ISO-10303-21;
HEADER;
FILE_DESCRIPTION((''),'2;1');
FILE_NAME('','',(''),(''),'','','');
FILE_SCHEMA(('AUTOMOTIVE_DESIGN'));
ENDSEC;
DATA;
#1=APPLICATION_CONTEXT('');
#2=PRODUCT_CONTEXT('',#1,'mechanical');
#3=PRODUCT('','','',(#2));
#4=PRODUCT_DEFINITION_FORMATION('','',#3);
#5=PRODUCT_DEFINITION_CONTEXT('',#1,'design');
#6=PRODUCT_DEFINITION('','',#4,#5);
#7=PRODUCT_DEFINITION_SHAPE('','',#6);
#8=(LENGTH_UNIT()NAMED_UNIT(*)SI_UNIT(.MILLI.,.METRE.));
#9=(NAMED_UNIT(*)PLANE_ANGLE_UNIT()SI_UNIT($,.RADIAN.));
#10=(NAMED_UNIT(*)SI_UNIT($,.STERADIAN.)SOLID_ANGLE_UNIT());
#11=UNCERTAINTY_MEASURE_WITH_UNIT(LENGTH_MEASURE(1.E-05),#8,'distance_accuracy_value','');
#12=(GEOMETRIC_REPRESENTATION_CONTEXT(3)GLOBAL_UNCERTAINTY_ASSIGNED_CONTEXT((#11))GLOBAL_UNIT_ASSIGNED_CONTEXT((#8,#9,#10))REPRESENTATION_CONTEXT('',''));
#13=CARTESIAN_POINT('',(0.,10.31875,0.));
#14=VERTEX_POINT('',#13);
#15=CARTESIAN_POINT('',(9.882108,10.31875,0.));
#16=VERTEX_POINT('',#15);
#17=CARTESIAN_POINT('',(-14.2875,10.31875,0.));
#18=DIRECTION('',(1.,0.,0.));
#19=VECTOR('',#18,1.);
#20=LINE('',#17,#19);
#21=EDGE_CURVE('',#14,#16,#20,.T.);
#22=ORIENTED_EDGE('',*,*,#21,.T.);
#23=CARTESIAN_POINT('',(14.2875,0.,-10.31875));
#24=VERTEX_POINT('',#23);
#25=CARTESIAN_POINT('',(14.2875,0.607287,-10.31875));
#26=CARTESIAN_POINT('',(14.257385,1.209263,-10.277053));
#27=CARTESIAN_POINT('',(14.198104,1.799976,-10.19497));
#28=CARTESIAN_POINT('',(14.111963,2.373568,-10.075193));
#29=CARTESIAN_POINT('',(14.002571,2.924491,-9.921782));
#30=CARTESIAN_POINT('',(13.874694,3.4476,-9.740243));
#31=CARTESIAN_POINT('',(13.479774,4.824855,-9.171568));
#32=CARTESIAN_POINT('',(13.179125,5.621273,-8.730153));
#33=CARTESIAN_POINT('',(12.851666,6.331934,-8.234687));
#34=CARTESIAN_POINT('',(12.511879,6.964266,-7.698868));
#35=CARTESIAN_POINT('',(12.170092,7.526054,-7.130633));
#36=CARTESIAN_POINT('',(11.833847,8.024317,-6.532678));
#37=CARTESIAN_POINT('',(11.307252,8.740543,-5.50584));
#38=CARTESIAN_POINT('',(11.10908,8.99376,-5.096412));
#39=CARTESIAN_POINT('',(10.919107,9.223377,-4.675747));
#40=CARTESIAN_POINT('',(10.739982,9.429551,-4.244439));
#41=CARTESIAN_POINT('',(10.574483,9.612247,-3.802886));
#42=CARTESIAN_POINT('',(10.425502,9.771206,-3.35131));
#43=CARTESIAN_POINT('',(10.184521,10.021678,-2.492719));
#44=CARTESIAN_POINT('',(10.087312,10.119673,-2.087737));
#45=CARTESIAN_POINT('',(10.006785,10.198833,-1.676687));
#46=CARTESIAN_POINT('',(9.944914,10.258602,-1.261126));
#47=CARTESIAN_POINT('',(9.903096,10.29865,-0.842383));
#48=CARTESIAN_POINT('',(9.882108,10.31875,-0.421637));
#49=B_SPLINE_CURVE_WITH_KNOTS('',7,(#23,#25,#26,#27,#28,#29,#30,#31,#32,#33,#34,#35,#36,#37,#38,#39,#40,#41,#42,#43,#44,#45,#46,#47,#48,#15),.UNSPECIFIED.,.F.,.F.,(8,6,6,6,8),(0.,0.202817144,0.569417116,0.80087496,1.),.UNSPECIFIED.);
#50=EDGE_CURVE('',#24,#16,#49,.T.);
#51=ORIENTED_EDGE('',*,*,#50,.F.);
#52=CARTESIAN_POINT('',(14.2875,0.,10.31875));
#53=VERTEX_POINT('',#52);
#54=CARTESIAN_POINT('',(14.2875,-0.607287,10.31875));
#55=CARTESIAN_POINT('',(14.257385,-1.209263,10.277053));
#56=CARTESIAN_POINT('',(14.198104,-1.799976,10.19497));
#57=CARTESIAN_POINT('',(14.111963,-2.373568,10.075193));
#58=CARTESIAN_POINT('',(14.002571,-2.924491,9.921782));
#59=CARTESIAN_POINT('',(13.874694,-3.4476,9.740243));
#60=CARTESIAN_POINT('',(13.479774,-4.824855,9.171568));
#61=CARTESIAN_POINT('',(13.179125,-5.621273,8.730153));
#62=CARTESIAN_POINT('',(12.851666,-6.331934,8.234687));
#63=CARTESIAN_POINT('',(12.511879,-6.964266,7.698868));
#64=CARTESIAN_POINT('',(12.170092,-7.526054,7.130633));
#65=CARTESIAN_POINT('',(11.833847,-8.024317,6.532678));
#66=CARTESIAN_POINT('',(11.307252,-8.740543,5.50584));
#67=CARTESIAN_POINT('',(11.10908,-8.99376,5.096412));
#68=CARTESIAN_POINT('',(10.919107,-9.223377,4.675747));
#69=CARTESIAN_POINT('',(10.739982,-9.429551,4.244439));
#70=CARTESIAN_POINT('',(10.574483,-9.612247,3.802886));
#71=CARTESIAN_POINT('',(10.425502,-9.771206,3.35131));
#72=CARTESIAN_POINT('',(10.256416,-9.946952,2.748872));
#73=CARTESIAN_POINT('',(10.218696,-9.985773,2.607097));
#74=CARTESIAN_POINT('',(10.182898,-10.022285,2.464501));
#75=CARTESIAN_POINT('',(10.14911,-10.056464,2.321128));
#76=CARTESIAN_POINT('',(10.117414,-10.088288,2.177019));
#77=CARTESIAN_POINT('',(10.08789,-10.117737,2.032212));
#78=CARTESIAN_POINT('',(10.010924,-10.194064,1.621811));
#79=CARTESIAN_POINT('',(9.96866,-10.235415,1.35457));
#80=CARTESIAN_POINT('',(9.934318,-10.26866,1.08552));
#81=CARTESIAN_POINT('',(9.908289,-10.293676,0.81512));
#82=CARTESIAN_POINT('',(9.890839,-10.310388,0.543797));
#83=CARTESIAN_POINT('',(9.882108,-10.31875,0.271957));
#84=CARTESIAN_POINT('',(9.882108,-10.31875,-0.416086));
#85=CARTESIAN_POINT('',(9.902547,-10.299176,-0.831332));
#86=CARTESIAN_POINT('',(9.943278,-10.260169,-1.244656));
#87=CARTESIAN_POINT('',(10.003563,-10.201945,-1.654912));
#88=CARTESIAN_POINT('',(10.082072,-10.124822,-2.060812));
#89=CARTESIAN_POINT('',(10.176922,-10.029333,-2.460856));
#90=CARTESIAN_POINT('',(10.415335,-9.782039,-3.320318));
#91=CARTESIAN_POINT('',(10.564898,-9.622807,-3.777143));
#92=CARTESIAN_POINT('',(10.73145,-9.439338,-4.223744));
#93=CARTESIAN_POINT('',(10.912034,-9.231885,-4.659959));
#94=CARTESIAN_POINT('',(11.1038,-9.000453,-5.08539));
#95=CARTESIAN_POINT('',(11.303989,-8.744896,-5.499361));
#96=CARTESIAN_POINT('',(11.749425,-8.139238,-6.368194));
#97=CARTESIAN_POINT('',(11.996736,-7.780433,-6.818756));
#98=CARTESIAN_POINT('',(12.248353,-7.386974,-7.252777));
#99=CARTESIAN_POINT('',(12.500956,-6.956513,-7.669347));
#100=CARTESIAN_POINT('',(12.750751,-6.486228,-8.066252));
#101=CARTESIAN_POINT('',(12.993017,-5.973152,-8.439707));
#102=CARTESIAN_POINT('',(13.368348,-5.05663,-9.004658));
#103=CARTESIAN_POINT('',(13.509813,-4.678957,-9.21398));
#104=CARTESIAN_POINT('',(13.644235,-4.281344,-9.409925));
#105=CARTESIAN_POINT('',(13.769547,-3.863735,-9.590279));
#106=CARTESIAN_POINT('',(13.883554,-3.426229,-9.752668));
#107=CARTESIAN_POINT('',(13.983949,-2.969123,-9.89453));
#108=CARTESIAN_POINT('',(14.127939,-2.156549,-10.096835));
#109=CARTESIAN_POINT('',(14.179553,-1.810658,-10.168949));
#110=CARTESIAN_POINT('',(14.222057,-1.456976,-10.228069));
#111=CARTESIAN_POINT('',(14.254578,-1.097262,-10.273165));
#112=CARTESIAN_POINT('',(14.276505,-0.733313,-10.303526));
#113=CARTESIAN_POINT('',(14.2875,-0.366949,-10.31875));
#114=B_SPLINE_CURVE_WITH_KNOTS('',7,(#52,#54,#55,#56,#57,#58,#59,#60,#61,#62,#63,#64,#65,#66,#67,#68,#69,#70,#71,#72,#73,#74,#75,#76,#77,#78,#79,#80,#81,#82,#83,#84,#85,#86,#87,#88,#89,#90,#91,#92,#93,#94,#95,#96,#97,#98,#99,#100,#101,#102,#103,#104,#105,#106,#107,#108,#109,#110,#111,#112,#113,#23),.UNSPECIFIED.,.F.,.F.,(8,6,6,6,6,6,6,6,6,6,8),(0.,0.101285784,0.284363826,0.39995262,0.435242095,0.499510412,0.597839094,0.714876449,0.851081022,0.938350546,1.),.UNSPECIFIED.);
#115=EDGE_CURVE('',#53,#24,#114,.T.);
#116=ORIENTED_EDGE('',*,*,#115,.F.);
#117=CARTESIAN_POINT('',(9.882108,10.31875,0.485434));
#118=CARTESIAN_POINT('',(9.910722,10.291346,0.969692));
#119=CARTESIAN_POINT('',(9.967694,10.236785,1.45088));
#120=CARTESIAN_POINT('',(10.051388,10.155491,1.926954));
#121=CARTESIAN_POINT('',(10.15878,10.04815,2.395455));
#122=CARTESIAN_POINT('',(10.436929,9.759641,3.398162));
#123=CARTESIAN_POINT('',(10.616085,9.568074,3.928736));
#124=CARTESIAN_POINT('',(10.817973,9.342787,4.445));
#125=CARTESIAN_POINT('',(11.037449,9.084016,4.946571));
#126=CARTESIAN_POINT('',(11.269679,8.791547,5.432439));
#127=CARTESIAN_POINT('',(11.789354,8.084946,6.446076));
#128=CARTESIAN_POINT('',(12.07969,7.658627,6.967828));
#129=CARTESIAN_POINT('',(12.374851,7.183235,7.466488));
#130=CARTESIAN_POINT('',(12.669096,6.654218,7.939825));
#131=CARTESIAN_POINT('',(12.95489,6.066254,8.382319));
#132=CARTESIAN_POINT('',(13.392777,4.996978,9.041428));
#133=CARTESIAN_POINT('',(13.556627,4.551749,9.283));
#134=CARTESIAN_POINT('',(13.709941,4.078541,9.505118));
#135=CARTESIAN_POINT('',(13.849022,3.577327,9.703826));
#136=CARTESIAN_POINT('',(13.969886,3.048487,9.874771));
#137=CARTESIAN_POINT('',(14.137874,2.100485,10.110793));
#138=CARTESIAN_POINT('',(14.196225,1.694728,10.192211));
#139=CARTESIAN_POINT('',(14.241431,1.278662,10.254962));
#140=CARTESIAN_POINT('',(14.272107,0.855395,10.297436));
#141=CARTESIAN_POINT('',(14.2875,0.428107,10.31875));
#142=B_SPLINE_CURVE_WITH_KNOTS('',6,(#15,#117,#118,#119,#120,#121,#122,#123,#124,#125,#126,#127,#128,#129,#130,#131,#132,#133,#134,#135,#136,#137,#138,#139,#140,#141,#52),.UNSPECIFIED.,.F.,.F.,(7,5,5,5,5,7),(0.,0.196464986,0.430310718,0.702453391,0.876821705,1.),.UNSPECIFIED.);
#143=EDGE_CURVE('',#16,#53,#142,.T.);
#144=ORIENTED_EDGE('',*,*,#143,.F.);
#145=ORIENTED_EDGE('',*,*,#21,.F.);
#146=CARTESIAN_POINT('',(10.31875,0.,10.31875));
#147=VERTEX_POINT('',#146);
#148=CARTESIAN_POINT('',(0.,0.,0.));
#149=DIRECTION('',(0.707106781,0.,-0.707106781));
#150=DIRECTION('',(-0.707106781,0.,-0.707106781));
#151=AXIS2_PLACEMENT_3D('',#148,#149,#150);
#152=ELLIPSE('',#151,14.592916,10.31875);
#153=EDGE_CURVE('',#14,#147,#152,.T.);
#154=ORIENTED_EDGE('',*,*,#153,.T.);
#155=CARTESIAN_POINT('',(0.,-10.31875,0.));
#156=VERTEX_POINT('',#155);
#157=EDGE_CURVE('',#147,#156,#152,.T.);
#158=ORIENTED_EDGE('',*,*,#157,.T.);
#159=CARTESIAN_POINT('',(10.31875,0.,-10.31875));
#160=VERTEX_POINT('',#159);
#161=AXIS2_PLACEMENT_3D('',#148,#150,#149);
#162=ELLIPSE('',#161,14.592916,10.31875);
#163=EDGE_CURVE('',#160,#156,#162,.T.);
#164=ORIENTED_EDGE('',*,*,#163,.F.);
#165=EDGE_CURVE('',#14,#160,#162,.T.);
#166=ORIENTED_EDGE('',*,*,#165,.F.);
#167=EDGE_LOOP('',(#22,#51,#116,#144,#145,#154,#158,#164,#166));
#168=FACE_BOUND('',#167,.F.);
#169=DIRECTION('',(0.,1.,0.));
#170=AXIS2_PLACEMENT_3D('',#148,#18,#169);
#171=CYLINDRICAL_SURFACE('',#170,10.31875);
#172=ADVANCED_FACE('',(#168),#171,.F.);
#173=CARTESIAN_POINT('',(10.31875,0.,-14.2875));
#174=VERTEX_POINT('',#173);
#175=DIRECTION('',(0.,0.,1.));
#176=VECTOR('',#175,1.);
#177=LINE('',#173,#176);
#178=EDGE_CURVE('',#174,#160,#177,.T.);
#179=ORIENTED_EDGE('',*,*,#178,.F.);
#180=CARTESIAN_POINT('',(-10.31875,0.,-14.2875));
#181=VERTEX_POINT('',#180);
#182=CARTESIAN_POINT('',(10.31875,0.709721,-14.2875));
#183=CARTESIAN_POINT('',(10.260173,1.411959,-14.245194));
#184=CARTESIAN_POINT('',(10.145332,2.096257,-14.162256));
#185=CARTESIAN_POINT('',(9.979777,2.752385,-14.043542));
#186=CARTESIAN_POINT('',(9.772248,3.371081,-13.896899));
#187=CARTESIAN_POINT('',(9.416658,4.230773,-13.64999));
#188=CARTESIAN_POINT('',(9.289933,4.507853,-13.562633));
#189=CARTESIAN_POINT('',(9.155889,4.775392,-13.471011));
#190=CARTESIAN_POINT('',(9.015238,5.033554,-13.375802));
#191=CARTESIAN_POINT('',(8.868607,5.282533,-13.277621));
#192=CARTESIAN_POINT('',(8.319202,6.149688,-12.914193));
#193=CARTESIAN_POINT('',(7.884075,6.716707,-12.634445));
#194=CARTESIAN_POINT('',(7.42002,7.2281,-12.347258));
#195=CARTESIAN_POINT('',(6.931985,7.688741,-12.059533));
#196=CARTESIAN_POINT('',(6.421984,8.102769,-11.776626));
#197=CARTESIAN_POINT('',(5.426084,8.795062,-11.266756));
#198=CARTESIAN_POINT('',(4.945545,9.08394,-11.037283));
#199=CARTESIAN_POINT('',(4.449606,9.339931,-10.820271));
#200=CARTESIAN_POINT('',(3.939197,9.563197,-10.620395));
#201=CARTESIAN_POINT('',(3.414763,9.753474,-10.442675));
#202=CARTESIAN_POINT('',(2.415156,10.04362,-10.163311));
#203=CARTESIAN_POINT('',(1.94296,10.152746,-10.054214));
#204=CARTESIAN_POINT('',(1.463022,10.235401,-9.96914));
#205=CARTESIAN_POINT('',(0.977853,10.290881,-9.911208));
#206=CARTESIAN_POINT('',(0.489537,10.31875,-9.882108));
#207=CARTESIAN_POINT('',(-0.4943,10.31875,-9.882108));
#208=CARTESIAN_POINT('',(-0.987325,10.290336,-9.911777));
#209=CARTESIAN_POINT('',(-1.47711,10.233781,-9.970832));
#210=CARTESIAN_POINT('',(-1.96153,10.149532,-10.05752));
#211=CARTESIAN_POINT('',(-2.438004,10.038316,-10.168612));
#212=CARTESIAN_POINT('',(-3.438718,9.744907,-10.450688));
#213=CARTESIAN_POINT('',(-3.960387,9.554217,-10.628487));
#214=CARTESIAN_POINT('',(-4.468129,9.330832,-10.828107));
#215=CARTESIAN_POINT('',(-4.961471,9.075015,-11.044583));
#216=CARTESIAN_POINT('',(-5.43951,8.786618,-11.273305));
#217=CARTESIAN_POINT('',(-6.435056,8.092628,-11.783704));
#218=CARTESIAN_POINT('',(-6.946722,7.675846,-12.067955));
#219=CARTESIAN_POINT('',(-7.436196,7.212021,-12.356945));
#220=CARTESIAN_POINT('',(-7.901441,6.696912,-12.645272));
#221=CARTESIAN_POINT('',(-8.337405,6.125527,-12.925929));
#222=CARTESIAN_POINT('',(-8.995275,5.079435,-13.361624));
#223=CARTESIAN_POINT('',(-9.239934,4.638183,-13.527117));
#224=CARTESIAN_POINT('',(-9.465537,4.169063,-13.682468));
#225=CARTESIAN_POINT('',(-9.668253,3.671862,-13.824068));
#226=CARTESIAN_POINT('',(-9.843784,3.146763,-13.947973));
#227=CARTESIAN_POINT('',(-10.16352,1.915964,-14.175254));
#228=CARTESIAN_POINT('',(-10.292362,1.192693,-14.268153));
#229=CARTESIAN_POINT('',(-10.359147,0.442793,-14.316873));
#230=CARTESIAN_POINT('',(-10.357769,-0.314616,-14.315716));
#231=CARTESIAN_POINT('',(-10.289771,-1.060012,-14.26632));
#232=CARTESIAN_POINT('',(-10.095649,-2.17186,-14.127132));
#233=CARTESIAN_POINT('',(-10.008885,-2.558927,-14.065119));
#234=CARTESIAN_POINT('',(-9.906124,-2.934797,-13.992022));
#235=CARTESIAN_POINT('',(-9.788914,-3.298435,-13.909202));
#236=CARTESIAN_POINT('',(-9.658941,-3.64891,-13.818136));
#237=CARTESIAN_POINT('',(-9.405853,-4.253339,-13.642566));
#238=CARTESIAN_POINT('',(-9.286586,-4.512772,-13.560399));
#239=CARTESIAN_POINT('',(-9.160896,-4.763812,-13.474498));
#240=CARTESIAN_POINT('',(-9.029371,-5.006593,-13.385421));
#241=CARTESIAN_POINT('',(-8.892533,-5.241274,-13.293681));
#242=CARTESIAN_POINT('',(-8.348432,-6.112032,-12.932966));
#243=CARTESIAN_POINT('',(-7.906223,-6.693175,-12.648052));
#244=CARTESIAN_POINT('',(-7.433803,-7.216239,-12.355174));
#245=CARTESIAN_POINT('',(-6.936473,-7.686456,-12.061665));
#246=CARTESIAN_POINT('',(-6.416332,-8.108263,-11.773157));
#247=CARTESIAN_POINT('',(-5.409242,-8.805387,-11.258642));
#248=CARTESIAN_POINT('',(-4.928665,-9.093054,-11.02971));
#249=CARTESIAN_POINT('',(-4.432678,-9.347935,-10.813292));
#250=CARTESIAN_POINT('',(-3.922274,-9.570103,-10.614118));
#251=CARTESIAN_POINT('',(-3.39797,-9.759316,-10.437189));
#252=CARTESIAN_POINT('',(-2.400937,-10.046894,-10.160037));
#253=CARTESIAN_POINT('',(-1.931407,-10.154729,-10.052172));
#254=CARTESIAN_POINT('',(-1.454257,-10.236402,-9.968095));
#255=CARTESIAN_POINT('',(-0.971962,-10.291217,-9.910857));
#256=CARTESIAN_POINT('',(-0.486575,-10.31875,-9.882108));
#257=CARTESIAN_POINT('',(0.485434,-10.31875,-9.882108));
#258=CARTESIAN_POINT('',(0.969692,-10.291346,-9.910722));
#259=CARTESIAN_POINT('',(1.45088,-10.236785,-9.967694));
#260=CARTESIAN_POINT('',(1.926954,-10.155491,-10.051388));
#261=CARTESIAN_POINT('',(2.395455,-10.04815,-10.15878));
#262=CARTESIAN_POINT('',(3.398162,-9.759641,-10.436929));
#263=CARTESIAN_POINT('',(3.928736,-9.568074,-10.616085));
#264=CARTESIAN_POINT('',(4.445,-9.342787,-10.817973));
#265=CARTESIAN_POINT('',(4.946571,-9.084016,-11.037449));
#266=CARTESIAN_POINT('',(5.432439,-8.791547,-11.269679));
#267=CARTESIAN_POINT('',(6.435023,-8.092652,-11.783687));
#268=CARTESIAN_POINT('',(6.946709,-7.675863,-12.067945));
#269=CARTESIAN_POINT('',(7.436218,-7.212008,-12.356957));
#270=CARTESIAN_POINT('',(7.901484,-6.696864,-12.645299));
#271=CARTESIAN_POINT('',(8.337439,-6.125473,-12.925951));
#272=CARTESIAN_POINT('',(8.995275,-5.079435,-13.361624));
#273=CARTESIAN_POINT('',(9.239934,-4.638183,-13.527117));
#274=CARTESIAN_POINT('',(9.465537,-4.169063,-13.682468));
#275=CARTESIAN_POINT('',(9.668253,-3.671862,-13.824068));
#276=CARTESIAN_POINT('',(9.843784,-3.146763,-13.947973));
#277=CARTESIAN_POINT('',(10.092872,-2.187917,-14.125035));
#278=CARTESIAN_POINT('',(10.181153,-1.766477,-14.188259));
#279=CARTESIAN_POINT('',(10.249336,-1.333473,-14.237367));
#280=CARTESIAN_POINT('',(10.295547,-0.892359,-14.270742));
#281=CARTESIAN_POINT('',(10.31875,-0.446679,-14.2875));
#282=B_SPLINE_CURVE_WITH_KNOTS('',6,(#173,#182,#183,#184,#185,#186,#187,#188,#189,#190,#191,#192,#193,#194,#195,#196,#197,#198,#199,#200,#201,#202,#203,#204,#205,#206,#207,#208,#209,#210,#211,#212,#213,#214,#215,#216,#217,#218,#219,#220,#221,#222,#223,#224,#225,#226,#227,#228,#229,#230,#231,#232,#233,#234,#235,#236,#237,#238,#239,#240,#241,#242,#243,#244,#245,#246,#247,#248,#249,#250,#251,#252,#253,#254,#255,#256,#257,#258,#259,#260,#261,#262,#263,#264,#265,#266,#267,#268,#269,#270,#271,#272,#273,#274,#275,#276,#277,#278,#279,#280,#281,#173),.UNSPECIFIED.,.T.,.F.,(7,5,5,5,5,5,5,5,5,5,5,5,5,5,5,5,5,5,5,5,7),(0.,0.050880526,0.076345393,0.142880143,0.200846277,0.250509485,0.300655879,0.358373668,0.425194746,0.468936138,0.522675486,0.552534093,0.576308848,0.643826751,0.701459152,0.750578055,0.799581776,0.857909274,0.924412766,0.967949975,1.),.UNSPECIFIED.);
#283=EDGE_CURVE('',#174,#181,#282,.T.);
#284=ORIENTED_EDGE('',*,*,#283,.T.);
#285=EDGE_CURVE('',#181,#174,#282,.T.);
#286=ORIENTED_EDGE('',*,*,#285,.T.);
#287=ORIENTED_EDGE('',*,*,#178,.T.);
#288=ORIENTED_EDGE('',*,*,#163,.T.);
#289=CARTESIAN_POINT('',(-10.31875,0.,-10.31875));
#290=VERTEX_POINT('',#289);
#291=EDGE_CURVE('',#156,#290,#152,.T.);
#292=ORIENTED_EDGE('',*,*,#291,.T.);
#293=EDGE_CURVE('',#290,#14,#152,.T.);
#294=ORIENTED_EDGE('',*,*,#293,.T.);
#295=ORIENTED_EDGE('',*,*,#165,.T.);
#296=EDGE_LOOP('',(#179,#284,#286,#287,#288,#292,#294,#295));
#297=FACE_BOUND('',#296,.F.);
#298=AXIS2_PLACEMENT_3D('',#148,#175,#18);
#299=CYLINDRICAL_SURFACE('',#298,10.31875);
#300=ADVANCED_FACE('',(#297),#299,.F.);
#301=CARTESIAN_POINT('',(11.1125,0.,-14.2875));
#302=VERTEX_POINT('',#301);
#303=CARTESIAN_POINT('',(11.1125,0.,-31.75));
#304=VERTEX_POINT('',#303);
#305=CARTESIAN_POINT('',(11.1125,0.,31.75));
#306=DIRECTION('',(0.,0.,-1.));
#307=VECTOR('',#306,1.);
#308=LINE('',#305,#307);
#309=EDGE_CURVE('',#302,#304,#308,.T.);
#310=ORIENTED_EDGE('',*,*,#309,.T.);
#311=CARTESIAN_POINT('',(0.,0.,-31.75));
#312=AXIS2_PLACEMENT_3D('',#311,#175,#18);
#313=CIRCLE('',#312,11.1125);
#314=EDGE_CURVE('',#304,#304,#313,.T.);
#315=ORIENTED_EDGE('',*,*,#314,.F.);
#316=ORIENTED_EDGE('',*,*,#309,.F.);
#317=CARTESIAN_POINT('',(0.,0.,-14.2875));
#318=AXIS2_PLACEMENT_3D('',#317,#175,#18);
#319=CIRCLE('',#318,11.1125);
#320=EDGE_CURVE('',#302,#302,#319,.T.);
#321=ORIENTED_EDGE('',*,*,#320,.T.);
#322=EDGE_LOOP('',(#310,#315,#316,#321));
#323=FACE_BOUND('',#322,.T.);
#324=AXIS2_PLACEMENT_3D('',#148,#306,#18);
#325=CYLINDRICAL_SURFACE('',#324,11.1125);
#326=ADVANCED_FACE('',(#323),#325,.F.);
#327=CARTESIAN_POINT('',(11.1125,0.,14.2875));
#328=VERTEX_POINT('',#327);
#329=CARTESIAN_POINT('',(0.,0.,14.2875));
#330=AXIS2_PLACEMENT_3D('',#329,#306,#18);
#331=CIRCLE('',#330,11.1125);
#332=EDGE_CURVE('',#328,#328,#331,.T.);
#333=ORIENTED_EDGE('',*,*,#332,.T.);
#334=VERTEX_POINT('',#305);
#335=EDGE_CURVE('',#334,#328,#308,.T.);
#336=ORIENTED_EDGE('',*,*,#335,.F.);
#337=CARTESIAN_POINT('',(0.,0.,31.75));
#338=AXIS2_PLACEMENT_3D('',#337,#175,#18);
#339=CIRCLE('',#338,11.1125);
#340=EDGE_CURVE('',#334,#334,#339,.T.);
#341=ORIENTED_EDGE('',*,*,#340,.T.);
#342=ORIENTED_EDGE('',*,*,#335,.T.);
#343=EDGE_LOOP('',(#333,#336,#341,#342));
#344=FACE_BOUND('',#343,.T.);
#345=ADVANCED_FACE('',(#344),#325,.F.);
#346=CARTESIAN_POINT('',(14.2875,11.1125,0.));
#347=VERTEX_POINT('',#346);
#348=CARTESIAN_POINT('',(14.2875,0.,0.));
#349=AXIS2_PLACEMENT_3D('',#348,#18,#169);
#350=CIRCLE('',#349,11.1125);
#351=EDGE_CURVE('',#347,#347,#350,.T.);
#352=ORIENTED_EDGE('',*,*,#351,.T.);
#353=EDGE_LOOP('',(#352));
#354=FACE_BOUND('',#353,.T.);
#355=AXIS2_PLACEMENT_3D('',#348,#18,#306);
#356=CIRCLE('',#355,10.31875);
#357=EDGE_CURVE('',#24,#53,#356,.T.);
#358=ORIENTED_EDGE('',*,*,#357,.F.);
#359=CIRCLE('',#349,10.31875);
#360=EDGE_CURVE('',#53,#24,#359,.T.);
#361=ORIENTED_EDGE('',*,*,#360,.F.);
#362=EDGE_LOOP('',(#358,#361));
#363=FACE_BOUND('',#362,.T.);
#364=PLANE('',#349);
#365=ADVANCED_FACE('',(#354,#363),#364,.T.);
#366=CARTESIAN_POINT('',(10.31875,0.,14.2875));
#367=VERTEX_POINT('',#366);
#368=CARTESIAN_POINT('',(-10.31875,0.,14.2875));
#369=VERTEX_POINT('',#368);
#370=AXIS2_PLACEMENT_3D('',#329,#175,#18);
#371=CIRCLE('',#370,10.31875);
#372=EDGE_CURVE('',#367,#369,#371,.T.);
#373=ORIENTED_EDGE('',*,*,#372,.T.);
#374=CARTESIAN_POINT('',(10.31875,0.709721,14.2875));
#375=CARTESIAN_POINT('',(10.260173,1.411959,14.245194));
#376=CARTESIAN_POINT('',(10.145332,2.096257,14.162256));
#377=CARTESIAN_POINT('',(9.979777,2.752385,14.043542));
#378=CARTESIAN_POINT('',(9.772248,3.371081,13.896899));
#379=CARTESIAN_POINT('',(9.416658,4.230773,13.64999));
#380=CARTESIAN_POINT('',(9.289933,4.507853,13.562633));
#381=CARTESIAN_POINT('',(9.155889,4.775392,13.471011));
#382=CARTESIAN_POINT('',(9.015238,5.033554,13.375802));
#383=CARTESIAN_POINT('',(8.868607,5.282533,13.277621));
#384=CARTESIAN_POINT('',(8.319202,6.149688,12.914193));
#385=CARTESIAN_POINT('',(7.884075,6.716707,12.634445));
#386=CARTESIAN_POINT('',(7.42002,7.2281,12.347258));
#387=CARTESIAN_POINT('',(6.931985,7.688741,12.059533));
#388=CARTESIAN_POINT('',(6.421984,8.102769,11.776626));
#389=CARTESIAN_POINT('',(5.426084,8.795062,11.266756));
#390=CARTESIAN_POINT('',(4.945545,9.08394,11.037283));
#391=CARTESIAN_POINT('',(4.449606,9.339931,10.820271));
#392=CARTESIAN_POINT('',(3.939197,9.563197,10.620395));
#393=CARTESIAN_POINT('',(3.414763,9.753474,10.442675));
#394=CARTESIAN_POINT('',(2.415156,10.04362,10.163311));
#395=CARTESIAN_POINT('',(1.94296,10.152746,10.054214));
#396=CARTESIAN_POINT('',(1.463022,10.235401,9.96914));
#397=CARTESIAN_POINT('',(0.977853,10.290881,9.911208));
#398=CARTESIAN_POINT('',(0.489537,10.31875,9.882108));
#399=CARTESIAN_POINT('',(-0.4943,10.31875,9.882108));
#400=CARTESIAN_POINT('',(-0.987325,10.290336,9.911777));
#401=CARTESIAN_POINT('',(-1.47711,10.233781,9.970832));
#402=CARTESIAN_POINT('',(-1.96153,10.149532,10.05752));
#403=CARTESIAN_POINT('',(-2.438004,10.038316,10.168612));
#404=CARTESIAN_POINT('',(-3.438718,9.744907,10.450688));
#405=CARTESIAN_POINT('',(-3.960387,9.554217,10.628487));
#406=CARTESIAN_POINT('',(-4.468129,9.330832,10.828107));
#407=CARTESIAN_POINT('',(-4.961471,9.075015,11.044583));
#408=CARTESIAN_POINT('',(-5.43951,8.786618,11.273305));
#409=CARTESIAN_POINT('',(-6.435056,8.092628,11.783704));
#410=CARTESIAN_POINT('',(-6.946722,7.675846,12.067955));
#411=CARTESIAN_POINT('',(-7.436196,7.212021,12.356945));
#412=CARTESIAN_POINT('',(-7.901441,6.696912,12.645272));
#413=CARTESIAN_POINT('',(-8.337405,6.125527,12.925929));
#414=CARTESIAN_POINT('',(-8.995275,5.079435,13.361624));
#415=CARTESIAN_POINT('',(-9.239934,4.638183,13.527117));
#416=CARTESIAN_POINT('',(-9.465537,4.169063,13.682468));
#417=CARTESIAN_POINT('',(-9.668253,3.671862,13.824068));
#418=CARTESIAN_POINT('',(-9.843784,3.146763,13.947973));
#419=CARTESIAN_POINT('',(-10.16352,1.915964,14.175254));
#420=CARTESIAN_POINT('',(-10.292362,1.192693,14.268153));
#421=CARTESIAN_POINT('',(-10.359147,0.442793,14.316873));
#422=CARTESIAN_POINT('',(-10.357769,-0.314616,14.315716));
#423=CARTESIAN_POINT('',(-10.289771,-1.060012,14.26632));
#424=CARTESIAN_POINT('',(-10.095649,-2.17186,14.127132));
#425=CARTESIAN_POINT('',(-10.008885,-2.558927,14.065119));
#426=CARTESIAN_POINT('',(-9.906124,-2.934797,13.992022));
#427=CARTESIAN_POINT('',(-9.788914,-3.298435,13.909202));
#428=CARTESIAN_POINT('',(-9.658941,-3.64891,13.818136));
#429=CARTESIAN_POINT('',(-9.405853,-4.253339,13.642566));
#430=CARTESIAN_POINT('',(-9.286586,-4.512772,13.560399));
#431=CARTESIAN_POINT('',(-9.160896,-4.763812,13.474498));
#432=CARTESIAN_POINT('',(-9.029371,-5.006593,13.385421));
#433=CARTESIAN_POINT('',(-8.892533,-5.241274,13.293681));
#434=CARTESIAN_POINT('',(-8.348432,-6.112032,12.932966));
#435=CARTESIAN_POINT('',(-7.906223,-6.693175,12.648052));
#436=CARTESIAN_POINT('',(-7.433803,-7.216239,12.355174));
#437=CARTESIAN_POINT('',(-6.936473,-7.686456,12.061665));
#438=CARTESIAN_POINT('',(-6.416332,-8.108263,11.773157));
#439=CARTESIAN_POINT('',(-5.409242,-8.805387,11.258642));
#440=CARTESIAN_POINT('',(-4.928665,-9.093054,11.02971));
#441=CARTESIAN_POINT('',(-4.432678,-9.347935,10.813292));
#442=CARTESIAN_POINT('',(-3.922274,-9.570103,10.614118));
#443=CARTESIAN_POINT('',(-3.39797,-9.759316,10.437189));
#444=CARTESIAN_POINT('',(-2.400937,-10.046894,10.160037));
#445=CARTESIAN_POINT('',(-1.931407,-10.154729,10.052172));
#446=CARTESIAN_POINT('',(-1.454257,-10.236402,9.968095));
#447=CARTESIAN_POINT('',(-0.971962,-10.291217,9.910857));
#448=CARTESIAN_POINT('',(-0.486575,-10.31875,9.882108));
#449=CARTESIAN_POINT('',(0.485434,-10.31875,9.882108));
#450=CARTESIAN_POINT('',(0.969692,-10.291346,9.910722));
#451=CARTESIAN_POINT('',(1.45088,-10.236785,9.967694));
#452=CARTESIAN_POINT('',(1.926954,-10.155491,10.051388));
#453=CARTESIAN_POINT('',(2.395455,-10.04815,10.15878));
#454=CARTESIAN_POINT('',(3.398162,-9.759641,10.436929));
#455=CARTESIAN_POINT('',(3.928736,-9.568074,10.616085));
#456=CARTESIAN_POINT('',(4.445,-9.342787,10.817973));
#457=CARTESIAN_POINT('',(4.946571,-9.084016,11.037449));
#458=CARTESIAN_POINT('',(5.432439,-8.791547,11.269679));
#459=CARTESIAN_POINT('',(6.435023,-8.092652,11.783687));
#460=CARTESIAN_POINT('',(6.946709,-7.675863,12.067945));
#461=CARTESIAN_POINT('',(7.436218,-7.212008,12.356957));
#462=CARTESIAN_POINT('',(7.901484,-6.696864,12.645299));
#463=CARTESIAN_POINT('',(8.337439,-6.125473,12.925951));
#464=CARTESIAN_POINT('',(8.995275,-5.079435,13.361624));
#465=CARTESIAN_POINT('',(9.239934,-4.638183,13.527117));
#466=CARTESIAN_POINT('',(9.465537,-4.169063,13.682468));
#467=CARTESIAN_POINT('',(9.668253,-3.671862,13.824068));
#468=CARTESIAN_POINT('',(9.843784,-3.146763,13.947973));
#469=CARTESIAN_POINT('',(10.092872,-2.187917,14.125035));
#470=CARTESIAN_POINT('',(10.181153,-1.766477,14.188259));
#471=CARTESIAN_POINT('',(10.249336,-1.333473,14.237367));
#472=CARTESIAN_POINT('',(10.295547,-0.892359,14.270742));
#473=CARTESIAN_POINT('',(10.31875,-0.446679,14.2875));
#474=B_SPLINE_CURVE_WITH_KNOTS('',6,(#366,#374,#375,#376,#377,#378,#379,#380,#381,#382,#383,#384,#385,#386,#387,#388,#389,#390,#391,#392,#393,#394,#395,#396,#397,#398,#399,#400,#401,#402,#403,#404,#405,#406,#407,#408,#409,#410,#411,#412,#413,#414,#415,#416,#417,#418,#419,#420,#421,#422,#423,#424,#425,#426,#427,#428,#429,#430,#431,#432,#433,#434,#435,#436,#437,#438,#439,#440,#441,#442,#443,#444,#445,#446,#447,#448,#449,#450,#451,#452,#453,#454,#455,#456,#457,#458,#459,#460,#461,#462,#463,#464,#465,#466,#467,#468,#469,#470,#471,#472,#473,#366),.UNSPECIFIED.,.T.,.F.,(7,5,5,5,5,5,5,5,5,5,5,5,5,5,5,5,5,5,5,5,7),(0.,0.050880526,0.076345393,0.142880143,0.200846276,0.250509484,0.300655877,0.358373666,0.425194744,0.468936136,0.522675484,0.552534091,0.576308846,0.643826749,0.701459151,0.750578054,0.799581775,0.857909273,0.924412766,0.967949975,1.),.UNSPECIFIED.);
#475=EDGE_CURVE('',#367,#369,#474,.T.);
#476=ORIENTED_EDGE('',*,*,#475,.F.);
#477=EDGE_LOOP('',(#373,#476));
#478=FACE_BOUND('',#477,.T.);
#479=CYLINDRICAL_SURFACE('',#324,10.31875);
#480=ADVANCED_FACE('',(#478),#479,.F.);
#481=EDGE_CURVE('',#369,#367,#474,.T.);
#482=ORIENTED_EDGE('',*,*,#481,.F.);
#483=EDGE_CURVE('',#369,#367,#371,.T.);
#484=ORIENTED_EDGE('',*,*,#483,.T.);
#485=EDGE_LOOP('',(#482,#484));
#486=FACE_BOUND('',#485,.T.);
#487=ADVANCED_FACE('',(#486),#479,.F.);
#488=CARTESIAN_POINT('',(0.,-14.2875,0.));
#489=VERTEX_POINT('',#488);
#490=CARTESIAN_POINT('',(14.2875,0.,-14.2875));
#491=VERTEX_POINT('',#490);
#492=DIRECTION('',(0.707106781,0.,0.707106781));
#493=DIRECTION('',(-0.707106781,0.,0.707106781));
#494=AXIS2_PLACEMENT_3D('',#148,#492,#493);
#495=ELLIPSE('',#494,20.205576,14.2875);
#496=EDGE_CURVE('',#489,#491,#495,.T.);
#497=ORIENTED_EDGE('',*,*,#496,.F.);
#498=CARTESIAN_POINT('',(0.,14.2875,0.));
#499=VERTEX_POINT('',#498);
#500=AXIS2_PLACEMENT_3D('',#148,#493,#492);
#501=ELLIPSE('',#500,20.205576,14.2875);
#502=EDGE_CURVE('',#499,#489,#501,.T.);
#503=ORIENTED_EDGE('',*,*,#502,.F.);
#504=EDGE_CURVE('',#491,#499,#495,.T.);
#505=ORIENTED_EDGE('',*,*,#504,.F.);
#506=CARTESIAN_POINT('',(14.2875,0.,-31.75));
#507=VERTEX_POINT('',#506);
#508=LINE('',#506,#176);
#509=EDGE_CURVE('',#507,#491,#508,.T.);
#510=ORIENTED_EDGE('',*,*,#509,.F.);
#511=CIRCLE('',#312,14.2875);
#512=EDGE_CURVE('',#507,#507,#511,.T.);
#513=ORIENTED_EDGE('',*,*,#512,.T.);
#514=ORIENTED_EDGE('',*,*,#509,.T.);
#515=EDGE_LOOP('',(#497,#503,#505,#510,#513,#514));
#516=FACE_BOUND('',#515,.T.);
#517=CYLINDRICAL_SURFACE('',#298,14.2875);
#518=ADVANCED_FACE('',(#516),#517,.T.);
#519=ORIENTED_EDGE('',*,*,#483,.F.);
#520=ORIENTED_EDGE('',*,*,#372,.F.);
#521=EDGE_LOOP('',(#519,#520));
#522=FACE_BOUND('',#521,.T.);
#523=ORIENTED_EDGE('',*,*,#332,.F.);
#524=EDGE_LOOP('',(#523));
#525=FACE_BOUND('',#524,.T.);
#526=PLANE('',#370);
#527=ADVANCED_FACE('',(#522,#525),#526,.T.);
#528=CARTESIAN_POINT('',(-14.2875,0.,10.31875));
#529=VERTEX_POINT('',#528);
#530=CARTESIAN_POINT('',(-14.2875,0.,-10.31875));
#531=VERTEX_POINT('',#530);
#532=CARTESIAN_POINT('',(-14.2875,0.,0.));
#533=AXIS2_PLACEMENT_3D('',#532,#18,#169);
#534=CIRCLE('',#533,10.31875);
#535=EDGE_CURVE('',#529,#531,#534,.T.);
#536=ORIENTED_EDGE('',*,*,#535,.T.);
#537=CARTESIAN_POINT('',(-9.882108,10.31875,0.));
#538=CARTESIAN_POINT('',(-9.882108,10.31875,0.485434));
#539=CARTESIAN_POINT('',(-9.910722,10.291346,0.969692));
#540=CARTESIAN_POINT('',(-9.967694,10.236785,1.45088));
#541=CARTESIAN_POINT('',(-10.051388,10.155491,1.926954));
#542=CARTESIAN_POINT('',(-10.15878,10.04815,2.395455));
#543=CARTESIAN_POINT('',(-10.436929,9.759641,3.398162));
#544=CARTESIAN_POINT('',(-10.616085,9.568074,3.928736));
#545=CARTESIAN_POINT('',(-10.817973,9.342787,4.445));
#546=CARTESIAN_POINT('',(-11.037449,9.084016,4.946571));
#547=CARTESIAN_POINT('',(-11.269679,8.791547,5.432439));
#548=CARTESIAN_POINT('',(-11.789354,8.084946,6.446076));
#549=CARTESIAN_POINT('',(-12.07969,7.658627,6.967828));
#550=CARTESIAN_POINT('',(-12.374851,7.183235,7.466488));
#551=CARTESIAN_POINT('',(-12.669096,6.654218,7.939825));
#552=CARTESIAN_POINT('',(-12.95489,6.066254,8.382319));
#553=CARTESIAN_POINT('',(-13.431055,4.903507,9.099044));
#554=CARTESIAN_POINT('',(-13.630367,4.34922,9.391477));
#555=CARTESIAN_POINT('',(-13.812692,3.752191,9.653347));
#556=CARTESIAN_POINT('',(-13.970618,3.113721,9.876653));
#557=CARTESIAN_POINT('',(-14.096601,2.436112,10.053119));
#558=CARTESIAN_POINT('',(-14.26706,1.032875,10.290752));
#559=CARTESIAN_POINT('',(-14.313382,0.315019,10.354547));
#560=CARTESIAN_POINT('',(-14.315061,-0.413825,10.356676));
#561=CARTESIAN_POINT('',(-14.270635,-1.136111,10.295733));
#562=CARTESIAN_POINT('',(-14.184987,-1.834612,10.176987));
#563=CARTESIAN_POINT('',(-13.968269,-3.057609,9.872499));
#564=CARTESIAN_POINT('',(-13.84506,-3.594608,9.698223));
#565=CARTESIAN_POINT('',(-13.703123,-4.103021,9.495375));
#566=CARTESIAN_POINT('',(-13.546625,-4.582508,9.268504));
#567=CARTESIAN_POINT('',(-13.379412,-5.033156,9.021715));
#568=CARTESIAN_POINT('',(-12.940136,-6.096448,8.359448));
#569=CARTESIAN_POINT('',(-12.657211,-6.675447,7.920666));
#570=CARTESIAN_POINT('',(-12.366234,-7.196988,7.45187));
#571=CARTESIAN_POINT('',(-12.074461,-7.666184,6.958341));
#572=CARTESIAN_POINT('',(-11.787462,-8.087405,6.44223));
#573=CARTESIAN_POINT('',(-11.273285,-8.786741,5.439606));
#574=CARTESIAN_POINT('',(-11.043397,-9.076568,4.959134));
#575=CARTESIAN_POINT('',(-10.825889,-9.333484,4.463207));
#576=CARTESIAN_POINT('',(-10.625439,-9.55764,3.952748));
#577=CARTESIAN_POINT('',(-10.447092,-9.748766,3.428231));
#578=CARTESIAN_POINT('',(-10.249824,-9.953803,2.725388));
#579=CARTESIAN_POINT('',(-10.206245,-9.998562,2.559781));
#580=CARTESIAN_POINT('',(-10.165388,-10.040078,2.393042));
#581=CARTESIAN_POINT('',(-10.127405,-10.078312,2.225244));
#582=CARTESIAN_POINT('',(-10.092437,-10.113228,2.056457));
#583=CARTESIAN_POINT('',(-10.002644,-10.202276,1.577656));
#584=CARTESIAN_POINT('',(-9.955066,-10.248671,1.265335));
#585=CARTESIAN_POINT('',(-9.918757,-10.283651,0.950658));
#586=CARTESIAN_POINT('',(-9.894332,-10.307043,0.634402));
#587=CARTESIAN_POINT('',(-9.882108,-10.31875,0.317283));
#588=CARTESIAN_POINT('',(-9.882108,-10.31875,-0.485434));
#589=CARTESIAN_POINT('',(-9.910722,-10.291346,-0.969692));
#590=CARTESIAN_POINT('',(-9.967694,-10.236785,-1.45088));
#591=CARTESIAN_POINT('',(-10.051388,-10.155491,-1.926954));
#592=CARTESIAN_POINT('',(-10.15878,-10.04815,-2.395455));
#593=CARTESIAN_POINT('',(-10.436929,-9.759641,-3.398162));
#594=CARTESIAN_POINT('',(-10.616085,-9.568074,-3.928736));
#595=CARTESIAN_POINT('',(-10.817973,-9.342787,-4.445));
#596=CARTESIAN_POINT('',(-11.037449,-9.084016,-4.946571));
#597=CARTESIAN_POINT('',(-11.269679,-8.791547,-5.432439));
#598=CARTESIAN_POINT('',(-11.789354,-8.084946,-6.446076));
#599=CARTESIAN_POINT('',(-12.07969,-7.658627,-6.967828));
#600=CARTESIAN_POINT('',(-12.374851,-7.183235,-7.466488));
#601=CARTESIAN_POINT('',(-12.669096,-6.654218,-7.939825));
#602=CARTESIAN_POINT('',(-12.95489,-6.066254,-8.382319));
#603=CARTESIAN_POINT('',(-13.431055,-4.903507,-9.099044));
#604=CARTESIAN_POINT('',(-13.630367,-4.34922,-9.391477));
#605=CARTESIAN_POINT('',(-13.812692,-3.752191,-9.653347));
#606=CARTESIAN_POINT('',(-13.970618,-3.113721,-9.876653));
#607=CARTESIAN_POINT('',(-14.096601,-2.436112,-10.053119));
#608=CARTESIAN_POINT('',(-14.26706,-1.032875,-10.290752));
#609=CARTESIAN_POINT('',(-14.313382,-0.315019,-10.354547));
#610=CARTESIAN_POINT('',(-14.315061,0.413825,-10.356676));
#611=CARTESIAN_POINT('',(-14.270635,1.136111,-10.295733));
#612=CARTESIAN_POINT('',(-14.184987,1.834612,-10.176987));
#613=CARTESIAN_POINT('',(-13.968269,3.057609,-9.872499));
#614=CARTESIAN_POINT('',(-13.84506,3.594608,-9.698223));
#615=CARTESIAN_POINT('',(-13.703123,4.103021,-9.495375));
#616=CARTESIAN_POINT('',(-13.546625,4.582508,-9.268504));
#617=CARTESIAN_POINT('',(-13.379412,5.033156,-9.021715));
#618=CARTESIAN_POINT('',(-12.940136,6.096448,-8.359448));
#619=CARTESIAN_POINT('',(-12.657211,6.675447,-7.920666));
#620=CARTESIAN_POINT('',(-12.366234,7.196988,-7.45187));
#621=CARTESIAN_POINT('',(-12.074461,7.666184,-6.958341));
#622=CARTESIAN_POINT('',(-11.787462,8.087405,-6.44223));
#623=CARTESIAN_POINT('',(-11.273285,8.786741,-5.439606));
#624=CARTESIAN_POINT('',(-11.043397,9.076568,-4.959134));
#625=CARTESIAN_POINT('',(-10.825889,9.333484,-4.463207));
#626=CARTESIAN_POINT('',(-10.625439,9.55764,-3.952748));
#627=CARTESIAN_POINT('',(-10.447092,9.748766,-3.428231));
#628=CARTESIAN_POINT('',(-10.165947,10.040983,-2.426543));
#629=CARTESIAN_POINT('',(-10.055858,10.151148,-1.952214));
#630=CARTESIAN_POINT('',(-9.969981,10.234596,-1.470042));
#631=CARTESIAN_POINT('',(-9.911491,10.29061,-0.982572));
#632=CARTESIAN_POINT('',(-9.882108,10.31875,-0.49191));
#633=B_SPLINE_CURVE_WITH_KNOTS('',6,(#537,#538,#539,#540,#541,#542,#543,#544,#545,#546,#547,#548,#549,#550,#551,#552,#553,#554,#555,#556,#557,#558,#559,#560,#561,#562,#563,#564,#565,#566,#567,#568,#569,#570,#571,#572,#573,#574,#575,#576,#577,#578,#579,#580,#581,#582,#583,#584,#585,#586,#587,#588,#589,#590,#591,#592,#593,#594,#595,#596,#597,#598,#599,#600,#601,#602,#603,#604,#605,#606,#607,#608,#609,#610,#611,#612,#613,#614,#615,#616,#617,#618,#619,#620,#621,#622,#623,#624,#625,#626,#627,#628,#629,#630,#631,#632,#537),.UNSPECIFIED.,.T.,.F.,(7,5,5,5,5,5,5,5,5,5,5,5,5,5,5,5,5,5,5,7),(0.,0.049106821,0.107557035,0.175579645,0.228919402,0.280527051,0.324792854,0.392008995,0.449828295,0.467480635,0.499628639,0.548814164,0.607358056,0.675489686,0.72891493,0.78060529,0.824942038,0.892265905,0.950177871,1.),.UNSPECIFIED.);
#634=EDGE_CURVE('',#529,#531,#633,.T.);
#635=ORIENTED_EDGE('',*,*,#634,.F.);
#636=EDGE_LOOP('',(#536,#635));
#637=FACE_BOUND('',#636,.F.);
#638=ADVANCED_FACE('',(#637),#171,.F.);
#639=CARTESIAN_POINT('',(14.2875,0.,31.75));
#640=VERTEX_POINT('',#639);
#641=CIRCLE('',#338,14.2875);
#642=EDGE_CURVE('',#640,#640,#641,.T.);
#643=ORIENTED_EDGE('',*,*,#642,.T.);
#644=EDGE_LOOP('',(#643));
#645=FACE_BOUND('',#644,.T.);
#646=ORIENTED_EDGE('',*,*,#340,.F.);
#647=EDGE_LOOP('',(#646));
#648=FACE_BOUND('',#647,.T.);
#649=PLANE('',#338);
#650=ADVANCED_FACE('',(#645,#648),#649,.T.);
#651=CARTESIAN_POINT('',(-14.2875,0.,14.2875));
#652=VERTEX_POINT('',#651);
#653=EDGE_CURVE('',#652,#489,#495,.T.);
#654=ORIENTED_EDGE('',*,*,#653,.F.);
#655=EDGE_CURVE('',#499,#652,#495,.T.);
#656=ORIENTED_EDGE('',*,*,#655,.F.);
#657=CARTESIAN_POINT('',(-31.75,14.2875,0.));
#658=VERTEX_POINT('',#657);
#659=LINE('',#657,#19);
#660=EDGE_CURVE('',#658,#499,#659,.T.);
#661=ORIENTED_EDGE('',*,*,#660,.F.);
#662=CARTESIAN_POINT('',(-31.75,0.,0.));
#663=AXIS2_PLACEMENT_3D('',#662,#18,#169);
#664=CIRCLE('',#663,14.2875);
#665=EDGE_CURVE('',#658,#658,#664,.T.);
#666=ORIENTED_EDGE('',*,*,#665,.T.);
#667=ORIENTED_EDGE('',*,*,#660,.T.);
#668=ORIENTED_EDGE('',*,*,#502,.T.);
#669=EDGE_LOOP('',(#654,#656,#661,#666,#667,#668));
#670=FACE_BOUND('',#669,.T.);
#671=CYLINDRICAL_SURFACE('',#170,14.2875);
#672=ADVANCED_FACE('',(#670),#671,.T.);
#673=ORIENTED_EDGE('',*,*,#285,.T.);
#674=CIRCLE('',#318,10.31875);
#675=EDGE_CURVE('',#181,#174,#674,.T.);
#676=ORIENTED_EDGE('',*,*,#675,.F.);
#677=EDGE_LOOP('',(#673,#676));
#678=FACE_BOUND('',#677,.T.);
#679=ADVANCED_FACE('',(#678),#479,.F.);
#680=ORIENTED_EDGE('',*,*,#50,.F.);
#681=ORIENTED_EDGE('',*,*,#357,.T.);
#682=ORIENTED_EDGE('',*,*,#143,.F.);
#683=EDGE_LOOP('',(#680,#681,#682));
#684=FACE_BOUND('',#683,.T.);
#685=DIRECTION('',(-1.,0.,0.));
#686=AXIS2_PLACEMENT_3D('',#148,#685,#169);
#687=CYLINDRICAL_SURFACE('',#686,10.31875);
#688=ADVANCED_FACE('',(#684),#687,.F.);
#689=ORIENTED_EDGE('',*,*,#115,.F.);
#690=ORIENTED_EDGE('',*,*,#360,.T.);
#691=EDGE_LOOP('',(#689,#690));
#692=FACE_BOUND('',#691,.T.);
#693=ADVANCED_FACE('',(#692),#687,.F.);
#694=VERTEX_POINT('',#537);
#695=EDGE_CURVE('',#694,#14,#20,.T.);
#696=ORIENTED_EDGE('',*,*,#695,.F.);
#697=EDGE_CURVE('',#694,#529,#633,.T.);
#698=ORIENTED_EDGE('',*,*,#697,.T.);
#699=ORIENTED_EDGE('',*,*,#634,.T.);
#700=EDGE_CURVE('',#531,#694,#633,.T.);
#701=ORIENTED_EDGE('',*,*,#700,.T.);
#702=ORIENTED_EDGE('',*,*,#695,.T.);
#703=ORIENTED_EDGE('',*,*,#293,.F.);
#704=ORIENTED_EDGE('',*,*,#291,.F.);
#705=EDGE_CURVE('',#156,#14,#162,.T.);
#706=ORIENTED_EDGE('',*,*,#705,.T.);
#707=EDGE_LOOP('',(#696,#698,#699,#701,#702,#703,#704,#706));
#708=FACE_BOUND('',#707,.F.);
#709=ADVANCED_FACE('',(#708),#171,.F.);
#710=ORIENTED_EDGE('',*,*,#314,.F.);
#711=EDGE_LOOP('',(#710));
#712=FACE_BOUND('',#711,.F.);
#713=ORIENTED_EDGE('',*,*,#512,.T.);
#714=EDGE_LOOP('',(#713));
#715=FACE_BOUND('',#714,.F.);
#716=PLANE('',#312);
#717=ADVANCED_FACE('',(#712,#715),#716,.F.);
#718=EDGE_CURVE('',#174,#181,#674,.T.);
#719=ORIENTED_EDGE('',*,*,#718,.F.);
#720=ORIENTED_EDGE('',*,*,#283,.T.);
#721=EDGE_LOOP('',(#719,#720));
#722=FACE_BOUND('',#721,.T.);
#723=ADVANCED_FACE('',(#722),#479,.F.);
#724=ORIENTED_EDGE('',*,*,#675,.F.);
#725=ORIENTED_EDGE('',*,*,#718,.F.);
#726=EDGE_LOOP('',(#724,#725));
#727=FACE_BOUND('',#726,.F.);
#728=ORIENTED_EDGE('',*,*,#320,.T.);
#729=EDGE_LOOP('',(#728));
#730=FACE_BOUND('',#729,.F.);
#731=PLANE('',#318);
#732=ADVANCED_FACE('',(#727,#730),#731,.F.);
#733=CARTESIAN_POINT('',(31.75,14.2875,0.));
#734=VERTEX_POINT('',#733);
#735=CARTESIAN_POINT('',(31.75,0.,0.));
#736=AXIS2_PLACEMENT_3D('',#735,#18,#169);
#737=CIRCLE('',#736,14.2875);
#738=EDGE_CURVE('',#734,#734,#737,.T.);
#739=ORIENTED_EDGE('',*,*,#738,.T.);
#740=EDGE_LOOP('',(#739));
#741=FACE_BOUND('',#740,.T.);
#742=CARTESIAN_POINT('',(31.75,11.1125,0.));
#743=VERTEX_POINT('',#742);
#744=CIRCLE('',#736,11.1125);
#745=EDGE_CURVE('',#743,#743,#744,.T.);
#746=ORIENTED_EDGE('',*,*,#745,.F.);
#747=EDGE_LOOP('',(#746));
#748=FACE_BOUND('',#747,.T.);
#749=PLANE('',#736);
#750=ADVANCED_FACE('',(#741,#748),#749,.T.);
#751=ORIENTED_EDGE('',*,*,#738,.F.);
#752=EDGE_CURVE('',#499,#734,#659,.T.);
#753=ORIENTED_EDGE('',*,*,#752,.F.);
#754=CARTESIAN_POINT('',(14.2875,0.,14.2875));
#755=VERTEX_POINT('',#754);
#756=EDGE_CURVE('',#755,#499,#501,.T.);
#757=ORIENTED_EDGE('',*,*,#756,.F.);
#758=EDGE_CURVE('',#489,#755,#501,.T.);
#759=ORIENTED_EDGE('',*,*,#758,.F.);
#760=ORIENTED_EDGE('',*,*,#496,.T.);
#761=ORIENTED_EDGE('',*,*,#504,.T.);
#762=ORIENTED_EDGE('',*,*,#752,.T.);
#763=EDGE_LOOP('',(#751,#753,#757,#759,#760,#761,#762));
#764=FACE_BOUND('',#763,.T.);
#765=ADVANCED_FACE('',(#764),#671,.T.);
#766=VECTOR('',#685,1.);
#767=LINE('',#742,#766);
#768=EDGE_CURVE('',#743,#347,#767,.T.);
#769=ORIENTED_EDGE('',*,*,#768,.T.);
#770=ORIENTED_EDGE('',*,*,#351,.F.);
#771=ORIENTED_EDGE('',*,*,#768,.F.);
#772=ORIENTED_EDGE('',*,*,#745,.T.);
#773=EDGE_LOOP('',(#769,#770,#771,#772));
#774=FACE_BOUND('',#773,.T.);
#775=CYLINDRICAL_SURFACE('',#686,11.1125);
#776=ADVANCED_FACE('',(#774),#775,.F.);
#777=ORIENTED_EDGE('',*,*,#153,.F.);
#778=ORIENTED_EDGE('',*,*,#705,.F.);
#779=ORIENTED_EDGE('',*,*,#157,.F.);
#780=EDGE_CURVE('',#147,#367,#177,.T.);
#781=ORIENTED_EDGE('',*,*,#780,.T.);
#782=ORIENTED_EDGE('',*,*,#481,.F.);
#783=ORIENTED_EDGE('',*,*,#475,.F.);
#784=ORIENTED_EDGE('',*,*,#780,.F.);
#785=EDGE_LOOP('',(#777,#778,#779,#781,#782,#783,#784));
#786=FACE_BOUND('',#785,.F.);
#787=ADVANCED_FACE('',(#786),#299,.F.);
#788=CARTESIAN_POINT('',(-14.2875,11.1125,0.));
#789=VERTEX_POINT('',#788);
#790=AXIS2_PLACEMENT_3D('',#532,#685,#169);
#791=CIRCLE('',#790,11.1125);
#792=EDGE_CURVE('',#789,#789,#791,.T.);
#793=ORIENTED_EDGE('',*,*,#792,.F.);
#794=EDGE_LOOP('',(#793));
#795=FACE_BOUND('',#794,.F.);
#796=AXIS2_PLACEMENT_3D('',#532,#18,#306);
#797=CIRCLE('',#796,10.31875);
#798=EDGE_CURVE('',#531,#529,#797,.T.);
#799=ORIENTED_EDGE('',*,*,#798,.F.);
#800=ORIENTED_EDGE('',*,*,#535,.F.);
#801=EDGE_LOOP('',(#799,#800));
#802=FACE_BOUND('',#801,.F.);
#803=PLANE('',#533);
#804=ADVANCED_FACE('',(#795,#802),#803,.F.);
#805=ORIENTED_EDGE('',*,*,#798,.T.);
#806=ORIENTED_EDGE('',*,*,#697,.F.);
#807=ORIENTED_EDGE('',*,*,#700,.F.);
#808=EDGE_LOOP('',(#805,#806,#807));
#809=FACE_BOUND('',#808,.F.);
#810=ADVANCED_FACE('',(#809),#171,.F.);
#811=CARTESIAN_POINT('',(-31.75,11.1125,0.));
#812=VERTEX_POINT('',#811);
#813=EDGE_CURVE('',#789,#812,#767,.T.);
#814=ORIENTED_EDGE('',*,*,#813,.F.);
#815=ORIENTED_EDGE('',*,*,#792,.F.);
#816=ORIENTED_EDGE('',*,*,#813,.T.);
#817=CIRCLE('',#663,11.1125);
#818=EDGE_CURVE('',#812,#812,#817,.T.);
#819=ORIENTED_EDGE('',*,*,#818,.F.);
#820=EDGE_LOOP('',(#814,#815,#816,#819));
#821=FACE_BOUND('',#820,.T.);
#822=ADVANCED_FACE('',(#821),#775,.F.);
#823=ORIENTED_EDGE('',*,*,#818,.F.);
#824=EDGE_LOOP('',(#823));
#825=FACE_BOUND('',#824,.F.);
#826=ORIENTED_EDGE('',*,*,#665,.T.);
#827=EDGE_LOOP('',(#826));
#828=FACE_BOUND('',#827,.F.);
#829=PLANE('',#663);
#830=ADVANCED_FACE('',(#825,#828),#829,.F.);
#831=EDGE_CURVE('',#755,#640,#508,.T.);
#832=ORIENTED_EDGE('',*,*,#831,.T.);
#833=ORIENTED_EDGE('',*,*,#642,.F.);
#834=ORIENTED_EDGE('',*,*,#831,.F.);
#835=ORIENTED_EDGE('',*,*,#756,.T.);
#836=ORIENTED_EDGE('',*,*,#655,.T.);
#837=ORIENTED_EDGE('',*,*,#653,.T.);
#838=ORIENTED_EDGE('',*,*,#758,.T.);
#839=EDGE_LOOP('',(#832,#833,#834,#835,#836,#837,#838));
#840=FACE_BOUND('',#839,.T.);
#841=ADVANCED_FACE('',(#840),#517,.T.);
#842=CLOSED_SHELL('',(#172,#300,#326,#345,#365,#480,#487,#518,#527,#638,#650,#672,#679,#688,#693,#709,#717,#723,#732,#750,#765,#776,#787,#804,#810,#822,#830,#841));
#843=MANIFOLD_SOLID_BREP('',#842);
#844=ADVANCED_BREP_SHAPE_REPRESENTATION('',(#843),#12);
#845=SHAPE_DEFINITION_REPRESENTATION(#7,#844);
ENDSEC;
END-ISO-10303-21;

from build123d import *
from build123d import SkipClean  # not in build123d's __all__

# Parameters (mm, degrees)
F0_R     = 14.2875
F0_R_2   = 11.1125
F1_DEPTH = 31.75
F0_R_3   = 10.31875
F2_DEPTH = 14.2875
F3_R     = 14.2875
F3_R_2   = 11.1125
F4_DEPTH = 31.75
F3_R_3   = 10.31875
F5_DEPTH = 14.2875
F6_DEPTH = 14.2875
F7_DEPTH = 14.2875


with BuildPart() as f1:
    # F0 (on Top) → F1 (new body, symmetric)
    with BuildSketch(Plane.XY):
        Circle(F0_R)
        Circle(F0_R_2, mode=Mode.SUBTRACT)
    extrude(amount=F1_DEPTH, both=True)

    # F0 (on Top) → F2 (join, symmetric)
    with BuildSketch(Plane.XY):
        Circle(F0_R_2)
        Circle(F0_R_3, mode=Mode.SUBTRACT)
    extrude(amount=F2_DEPTH, both=True)

    # F3 (on Right) → F4 (join, symmetric)
    with BuildSketch(Plane.YZ):
        Circle(F3_R)
        Circle(F3_R_2, mode=Mode.SUBTRACT)
    extrude(amount=F4_DEPTH, both=True)

    # F3 (on Right) → F5 (join, symmetric)
    with BuildSketch(Plane.YZ):
        Circle(F3_R_2)
        Circle(F3_R_3, mode=Mode.SUBTRACT)
    with SkipClean():  # cleaning this boolean's faces spoils the solid; the shape is the same uncleaned
        extrude(amount=F5_DEPTH, both=True)

    # F0 (on Top) → F6 (cut, symmetric)
    with BuildSketch(Plane.XY):
        Circle(F0_R_3)
    with SkipClean():  # cleaning this boolean's faces spoils the solid; the shape is the same uncleaned
        extrude(amount=F6_DEPTH, both=True, mode=Mode.SUBTRACT)

    # F3 (on Right) → F7 (cut, symmetric)
    with BuildSketch(Plane.YZ):
        Circle(F3_R_3)
    extrude(amount=F7_DEPTH, both=True, mode=Mode.SUBTRACT)


solid = f1.part
